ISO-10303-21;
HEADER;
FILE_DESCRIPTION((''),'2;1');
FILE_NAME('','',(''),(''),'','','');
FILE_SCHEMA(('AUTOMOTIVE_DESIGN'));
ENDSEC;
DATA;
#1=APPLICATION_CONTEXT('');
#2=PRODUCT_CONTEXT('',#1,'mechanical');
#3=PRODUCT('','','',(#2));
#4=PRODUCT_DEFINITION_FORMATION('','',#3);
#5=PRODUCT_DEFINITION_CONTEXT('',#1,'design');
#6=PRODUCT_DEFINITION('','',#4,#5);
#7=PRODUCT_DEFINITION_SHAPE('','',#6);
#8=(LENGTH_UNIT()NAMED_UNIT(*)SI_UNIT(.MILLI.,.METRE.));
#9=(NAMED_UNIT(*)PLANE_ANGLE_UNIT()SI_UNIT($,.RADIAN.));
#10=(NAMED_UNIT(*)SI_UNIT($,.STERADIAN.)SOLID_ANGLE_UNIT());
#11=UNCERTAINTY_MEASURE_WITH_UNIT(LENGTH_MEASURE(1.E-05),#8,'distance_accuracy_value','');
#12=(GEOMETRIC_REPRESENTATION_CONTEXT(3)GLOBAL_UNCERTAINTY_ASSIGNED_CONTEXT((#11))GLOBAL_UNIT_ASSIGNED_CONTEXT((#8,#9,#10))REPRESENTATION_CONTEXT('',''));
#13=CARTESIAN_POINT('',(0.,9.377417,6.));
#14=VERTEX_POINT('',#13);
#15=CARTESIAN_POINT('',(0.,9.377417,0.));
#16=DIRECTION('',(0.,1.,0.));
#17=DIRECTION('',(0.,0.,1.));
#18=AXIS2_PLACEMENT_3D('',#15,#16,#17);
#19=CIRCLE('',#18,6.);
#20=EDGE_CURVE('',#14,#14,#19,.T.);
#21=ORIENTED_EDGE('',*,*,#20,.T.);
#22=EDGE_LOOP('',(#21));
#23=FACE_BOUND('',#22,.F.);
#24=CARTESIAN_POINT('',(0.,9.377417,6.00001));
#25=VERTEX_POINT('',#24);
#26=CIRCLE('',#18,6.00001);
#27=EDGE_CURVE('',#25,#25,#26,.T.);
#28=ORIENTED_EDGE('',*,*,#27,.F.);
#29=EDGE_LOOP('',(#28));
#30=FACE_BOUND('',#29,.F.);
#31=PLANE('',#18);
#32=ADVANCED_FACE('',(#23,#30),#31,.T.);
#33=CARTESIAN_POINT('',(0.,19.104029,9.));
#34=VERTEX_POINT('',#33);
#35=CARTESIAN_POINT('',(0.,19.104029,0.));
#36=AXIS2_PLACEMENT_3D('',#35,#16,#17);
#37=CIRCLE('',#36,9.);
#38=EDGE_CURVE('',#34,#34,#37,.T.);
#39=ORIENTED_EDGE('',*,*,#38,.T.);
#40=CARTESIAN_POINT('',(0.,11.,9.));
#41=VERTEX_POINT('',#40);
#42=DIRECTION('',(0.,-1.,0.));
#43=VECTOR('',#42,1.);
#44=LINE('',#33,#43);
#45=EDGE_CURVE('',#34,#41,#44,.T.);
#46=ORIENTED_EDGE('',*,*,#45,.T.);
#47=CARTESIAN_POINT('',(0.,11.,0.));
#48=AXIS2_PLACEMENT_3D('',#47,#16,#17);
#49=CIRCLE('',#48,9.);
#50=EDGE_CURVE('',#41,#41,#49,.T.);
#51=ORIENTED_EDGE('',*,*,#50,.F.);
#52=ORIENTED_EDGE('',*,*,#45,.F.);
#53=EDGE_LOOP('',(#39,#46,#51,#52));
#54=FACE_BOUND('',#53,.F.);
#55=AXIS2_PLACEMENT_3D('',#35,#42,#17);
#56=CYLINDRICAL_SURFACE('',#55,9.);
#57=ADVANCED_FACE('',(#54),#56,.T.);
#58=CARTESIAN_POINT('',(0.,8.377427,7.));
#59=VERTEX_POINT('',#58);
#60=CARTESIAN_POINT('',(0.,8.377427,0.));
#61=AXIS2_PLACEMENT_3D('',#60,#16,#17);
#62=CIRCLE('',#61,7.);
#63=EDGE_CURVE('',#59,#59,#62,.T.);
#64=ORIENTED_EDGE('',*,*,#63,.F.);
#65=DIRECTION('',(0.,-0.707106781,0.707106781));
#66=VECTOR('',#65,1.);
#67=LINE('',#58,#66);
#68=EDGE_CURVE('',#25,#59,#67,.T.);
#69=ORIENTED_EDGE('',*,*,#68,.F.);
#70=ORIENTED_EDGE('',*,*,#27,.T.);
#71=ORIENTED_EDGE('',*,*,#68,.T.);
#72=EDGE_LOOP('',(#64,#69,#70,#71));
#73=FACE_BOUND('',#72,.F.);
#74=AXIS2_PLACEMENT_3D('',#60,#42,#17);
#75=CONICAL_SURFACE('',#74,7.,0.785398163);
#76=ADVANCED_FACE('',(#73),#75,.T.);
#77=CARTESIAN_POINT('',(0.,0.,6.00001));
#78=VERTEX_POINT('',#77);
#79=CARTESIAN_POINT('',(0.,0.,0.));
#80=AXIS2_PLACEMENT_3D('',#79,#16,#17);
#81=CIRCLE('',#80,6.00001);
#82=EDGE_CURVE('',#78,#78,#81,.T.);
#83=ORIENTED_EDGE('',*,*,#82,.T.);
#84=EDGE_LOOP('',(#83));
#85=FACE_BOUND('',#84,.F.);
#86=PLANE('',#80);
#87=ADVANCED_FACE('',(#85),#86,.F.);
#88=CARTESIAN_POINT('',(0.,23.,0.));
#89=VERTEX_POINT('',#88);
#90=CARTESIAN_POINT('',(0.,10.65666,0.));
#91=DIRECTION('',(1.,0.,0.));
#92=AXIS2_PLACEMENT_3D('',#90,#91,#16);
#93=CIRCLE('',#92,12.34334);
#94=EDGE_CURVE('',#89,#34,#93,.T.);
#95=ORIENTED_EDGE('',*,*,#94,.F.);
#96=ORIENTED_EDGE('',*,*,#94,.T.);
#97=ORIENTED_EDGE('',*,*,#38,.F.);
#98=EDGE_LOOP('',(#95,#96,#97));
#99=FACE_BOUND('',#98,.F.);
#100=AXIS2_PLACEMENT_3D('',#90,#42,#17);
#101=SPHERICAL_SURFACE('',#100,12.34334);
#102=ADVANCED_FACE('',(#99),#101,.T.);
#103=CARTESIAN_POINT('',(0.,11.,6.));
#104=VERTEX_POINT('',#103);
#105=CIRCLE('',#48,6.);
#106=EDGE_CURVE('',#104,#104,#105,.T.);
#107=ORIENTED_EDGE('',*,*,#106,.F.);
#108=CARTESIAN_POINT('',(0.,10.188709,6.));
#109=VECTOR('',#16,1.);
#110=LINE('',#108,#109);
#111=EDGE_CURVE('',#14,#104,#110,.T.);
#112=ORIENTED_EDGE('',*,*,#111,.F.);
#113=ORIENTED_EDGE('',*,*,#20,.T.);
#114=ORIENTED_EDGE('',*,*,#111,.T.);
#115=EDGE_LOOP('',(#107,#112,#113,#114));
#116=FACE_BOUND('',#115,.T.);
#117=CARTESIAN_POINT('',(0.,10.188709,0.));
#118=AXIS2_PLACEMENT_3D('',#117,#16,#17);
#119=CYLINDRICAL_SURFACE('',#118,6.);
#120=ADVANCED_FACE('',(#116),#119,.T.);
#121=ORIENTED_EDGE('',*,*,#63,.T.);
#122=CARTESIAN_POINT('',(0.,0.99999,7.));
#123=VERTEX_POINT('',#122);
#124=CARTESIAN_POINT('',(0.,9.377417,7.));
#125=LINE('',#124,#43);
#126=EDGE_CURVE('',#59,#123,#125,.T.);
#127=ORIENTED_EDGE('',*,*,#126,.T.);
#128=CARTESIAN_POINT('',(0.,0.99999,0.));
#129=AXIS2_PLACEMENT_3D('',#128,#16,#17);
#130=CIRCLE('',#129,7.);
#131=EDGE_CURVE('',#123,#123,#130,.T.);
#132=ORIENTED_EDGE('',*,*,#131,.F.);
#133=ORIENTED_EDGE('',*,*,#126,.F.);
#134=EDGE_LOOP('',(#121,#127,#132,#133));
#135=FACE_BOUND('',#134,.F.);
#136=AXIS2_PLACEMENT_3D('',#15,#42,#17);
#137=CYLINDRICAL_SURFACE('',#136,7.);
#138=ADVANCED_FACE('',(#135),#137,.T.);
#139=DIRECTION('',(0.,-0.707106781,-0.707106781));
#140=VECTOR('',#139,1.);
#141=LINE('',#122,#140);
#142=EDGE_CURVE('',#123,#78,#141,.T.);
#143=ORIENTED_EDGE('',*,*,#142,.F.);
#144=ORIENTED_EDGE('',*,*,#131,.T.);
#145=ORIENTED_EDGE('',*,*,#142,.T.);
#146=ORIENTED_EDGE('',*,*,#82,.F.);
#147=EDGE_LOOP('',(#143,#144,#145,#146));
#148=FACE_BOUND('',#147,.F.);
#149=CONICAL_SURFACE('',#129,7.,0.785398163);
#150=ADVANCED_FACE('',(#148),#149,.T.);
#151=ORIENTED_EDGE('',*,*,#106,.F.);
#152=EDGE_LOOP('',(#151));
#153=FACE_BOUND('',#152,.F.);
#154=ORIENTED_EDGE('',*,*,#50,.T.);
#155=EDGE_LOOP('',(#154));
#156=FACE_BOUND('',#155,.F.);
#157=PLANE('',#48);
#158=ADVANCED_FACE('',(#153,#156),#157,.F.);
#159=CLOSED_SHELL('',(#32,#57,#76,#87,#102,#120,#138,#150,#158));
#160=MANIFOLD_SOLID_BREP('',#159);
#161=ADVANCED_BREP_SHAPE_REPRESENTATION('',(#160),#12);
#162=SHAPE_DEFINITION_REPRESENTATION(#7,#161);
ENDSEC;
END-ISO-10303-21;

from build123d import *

# Parameters (mm, degrees)
F0_W    = 1.6225828454
F0_H    = 6
F2_SIZE = 0.99999


# Not quite as in the source:
# - a fillet or chamfer is up to 0.001 mm smaller than in the source, because OpenCascade refuses the exact size


with BuildPart() as f1:
    # F0 (on Right) → F1 (revolve)
    with BuildSketch(Plane.YZ):
        Polygon((11, 6), (11, 0), (19.1040290039, 0), (19.1040290039, 9), (11, 9), (11, 7), align=None)
        with BuildLine():
            Line((19.1040290039, 9), (19.1040290039, 0))
            Line((19.1040290039, 0), (23, 0))
            ThreePointArc((23, 0), (21.9842102668, 4.9035341847), (19.1040290039, 9))
        make_face()
        Polygon((0, 7), (0, 0), (9.3774171546, 0), (9.3774171546, 6), (9.3774171546, 7), align=None)
        with Locations((10.1887085773, 3)):
            Rectangle(F0_W, F0_H)
    revolve(axis=Axis((0, 9.5520145019, 0), (0, 1, 0)))

    # F2 (size 1 in the source; OpenCascade refuses exactly that, so slightly less here)
    f2_edges = [f1.edges().sort_by_distance(p)[0] for p in [
        (0, 9.377417, -7),
        (0, 0, -7),
    ]]
    chamfer(f2_edges, length=F2_SIZE)


solid = f1.part
